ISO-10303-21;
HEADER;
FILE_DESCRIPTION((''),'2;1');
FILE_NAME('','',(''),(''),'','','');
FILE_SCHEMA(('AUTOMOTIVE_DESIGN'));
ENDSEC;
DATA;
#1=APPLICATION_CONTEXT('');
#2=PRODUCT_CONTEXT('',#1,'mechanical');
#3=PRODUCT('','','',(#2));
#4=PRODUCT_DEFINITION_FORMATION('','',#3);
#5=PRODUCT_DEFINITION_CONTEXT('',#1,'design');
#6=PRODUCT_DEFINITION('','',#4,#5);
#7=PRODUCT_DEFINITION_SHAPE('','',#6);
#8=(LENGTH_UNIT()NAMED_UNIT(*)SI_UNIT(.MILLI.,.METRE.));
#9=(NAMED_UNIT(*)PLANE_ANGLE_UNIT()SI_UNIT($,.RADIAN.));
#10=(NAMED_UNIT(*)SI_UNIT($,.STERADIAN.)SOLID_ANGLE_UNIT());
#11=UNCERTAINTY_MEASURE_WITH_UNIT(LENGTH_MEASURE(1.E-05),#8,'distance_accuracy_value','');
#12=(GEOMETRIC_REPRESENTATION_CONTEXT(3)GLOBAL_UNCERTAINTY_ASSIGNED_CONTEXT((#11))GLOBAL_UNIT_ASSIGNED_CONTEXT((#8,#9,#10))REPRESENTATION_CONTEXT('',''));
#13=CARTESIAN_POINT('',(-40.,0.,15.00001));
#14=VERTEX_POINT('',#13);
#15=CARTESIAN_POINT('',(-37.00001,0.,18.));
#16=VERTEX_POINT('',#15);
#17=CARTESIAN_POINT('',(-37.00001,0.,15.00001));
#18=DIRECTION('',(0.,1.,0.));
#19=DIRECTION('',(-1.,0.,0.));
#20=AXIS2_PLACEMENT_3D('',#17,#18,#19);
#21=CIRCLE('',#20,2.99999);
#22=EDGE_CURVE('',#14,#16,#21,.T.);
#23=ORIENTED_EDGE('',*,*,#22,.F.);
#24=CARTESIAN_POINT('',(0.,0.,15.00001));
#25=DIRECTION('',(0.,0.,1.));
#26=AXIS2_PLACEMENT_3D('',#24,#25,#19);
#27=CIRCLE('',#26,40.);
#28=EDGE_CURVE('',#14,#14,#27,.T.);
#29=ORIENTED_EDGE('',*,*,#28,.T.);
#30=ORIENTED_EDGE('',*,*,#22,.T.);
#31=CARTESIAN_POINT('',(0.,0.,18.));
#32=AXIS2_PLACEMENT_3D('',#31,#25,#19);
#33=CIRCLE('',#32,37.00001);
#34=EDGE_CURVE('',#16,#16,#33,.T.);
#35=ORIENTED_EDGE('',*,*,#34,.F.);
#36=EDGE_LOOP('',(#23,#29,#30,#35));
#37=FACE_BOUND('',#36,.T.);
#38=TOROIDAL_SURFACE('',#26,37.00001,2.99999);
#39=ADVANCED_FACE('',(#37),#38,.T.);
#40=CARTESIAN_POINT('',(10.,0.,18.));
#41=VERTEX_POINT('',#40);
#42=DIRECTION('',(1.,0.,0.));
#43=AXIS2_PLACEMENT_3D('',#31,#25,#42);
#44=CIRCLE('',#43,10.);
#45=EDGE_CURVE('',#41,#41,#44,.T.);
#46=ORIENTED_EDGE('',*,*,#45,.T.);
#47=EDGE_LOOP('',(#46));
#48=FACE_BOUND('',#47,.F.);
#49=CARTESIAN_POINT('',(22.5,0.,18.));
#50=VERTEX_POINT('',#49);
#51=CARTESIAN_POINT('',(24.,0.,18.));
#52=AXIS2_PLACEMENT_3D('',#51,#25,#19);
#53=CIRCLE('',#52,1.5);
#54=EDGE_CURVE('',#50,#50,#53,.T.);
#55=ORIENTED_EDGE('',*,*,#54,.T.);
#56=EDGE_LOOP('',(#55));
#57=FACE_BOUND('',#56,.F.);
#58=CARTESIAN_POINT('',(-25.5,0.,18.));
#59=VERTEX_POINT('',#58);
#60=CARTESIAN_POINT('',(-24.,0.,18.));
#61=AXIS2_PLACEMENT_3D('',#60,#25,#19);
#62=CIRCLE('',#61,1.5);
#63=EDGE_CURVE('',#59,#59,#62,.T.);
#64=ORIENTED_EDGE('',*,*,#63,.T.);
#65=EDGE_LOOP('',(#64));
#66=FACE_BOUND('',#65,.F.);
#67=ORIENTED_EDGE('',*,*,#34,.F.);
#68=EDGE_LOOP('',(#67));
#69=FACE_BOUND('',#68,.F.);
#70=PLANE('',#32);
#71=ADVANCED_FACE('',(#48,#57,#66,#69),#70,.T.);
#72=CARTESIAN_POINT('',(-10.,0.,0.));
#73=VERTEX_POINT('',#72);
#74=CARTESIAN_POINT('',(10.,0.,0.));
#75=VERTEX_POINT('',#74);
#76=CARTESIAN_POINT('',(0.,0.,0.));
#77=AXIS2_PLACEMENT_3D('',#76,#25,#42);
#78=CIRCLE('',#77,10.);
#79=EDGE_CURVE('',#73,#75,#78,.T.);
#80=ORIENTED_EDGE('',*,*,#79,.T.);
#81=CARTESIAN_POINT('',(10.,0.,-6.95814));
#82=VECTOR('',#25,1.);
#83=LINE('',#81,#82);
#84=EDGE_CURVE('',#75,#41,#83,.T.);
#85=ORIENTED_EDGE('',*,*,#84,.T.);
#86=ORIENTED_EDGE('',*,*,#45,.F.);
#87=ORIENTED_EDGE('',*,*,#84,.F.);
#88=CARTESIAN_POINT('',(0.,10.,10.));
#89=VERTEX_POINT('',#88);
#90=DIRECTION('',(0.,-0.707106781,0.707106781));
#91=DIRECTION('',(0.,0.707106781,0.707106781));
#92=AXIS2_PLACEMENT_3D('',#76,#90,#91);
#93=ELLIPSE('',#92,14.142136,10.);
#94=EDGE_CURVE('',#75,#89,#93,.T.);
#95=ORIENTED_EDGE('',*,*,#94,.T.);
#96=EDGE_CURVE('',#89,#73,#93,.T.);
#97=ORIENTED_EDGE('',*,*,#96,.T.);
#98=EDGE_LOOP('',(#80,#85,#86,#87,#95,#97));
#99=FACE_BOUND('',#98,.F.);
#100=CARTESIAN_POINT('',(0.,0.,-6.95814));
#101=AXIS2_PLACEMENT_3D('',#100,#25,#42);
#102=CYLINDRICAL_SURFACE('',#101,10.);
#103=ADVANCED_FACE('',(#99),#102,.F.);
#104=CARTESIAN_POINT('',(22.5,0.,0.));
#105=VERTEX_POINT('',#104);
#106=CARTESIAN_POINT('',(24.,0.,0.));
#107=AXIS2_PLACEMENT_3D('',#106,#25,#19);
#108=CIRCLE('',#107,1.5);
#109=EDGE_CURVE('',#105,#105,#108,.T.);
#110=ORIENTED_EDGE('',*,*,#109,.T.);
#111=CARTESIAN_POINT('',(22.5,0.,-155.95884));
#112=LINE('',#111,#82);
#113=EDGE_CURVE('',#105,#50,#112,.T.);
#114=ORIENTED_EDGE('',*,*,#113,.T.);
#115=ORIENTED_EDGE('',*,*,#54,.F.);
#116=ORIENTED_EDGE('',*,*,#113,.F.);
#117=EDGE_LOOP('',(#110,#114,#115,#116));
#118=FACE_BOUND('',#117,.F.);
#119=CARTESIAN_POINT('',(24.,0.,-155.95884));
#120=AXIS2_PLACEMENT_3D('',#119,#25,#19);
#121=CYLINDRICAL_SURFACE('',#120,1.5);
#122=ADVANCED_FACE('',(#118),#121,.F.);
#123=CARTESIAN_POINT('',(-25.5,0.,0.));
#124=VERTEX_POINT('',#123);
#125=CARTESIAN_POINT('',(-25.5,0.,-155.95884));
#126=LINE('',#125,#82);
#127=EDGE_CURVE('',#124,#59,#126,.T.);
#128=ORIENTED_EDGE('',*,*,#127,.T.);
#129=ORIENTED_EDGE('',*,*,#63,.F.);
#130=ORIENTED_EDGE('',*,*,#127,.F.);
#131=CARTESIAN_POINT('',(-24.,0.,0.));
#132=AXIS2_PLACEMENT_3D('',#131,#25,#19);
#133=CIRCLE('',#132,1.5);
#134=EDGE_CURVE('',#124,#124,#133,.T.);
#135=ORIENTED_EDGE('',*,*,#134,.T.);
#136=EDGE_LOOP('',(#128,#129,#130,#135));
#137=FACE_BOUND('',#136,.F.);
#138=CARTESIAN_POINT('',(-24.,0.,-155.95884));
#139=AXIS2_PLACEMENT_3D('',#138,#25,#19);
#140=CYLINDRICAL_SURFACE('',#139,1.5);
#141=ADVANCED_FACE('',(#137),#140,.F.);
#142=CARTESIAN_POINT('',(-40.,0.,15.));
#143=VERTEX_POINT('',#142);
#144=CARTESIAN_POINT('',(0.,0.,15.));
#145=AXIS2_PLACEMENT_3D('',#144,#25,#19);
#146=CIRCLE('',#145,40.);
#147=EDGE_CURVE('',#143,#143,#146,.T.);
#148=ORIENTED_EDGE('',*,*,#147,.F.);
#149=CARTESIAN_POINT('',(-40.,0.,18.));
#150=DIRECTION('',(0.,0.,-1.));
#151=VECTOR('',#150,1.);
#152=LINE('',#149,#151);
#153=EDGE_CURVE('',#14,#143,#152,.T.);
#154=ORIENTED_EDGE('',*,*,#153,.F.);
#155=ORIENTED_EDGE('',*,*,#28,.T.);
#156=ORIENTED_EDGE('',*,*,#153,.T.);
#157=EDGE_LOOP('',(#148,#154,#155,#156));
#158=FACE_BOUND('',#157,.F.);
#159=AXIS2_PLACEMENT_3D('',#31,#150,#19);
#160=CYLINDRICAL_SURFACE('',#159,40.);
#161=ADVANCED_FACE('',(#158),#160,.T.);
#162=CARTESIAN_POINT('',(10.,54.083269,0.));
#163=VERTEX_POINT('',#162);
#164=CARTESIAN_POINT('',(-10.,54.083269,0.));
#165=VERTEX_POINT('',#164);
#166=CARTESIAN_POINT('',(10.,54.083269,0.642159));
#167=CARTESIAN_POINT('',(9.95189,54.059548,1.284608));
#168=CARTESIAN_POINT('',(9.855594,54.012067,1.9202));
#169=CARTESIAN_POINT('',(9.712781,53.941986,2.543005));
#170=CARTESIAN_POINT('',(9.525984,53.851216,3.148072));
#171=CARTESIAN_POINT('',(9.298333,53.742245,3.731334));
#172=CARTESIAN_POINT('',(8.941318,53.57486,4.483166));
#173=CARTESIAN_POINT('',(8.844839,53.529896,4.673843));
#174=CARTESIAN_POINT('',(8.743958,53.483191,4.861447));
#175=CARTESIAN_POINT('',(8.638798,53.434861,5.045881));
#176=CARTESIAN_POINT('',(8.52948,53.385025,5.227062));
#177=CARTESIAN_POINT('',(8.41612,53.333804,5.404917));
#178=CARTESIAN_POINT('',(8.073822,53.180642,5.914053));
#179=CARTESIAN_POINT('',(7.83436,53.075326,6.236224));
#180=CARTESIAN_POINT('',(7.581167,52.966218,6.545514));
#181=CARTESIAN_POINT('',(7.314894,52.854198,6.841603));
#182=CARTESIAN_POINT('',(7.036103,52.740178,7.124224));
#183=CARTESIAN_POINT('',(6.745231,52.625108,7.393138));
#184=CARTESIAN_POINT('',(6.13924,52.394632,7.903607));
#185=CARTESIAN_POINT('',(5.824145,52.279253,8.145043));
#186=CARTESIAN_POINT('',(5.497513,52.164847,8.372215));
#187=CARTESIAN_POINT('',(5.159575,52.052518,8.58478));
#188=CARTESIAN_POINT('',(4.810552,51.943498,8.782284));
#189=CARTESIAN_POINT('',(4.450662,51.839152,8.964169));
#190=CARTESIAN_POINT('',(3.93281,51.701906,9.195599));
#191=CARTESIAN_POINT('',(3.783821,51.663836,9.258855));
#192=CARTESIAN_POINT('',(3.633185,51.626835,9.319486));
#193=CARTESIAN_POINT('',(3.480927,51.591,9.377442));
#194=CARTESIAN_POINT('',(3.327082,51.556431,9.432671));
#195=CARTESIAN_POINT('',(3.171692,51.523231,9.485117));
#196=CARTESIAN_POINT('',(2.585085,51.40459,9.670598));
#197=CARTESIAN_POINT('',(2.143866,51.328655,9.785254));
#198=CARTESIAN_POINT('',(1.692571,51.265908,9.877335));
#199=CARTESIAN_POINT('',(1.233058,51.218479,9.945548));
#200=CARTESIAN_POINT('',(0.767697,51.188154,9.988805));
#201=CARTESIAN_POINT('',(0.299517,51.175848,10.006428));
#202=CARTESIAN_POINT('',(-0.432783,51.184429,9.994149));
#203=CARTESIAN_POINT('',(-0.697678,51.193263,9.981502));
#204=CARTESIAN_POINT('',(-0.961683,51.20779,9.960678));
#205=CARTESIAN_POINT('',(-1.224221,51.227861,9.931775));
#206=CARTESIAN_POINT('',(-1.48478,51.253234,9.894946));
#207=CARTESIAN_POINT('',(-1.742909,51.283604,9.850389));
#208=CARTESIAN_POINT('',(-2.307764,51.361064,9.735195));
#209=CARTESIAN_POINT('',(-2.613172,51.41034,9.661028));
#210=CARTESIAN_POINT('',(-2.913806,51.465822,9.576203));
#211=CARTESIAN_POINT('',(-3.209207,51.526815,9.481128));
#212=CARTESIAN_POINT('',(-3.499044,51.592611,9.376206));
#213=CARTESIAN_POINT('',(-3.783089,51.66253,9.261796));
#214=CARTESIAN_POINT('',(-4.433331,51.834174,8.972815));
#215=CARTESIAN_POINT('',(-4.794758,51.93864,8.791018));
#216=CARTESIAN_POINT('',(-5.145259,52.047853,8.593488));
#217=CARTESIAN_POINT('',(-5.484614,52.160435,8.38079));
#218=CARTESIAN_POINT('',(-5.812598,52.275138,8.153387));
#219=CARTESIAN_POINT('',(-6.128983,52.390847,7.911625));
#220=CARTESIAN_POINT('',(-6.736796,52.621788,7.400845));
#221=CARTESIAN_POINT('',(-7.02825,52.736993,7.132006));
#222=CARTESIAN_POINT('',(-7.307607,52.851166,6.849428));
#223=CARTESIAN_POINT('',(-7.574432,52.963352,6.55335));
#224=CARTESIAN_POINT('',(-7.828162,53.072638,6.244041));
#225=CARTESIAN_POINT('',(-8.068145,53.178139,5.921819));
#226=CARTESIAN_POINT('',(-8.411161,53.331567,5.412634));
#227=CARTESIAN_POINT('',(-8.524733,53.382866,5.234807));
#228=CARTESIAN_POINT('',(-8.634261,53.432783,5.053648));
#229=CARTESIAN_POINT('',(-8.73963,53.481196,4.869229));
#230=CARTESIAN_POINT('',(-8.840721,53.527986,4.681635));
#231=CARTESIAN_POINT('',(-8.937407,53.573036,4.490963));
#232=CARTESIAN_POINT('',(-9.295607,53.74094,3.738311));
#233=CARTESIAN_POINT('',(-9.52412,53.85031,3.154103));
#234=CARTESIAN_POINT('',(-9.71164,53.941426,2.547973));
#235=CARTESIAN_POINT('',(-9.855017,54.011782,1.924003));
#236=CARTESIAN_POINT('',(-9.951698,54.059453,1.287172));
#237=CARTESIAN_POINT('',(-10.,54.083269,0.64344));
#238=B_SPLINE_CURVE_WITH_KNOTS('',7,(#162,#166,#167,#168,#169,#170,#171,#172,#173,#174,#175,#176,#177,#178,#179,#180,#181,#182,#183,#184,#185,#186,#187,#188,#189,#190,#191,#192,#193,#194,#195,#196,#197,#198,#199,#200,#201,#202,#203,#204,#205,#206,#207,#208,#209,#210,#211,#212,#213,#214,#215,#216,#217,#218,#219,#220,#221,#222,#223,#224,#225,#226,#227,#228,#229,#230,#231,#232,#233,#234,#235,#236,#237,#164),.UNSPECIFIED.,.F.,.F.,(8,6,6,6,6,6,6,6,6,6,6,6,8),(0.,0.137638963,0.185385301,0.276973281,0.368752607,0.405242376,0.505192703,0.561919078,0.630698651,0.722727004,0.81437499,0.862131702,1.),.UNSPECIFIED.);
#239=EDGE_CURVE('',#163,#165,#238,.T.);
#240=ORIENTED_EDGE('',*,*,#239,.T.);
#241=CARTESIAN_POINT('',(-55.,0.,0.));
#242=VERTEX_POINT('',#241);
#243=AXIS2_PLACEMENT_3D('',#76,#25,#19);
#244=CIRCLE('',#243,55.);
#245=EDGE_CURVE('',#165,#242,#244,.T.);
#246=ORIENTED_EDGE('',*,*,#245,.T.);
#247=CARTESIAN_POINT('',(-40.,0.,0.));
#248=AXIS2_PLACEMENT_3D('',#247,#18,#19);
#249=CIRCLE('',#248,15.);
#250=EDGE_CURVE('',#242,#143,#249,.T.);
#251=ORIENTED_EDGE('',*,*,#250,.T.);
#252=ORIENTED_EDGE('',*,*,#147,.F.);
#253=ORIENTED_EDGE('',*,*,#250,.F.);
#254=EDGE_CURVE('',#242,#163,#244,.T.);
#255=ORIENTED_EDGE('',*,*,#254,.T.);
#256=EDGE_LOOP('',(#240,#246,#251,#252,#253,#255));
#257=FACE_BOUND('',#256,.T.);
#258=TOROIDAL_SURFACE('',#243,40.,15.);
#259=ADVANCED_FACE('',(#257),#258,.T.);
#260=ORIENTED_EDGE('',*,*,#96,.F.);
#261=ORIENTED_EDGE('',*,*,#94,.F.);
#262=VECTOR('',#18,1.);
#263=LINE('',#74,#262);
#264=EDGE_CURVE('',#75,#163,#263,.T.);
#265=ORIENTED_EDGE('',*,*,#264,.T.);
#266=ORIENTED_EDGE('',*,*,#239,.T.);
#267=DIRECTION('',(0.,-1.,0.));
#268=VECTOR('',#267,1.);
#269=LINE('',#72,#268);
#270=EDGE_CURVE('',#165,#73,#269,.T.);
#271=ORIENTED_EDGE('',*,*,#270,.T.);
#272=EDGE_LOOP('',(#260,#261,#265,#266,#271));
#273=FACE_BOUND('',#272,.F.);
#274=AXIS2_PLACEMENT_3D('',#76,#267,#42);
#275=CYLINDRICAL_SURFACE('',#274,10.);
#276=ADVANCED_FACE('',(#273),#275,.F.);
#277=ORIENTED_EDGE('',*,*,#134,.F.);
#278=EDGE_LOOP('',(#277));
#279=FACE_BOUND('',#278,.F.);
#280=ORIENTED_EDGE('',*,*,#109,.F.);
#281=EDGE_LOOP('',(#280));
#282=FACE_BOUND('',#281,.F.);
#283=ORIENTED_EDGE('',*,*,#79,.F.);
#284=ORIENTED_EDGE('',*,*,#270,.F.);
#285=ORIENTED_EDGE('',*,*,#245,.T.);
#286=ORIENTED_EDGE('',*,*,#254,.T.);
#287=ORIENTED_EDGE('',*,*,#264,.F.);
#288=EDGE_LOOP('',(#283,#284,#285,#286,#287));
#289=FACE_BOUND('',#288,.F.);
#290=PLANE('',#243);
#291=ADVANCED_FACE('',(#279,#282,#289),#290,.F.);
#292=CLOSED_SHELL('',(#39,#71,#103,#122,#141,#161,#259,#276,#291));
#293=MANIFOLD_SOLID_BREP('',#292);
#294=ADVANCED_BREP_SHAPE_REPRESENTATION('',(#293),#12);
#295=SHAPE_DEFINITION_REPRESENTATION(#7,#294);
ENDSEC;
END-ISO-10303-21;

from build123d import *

# Parameters (mm, degrees)
F0_W     = 10
F0_H     = 25.0418604054
F0_H_2   = 18
F0_H_3   = 6.9581395946
F3_R     = 10
F4_DEPTH = 141.6
F7_D     = 3
F8_D     = 3
F9_R     = 2.99999


# Not quite as in the source:
# - a fillet or chamfer that OpenCascade refuses, or shapes differently, is made with other operations: its cross-section is extruded or revolved along the edge and cut away or added
# - a fillet or chamfer is up to 0.001 mm smaller than in the source, because OpenCascade refuses the exact size


with BuildPart() as f1:
    # F0 (on Front) → F1 (revolve)
    with BuildSketch(Plane.XZ):
        Polygon((-55, 15), (-55, 0), (0, 0), (0, 18), (-40, 18), (-40, 15), align=None)
    revolve(axis=Axis((0, 0, 9), (0, 0, 1)))

    # F0 (on Front) → F2 (revolve, cut)
    with BuildSketch(Plane.XZ):
        with Locations((5, 30.5209302027)):
            Rectangle(F0_W, F0_H)
        with Locations((5, 9)):
            Rectangle(F0_W, F0_H_2)
        with Locations((5, -3.4790697973)):
            Rectangle(F0_W, F0_H_3)
    revolve(axis=Axis((0, 0, 18.0418604054), (0, 0, 1)), mode=Mode.SUBTRACT)

    # F3 (on Front) → F4 (cut)
    with BuildSketch(Plane.XZ):
        Circle(F3_R)
    extrude(amount=-F4_DEPTH, mode=Mode.SUBTRACT)

    # F5: fillet of radius 15 on 1 edges, made by hand

    # F5_s1 → F5_t2 (revolve, cut)
    with BuildSketch(Plane.XZ):
        with BuildLine():
            ThreePointArc((-55, 0), (-50.6066017178, 10.6066017178), (-40, 15))
            Line((-40, 15), (-55, 15))
            Line((-55, 15), (-55, 0))
        make_face()
    revolve(axis=Axis((0, 0, 15), (0, 0, 1)), mode=Mode.SUBTRACT)

    # F7 (through all)
    with Locations(Plane(origin=(0, 0, 0), x_dir=(1, 0, 0), z_dir=(0, 0, -1))):
        with Locations((24, 0)):
            Hole(F7_D / 2)

    # F8 (through all)
    with Locations(Plane(origin=(0, 0, 0), x_dir=(1, 0, 0), z_dir=(0, 0, -1))):
        with Locations((-24, 0)):
            Hole(F8_D / 2)

    # F9 (radius 3 in the source; OpenCascade refuses exactly that, so slightly less here)
    f9_edges = [f1.edges().sort_by_distance(p)[0] for p in [
        (40, 0, 18),
    ]]
    fillet(f9_edges, radius=F9_R)


solid = f1.part
